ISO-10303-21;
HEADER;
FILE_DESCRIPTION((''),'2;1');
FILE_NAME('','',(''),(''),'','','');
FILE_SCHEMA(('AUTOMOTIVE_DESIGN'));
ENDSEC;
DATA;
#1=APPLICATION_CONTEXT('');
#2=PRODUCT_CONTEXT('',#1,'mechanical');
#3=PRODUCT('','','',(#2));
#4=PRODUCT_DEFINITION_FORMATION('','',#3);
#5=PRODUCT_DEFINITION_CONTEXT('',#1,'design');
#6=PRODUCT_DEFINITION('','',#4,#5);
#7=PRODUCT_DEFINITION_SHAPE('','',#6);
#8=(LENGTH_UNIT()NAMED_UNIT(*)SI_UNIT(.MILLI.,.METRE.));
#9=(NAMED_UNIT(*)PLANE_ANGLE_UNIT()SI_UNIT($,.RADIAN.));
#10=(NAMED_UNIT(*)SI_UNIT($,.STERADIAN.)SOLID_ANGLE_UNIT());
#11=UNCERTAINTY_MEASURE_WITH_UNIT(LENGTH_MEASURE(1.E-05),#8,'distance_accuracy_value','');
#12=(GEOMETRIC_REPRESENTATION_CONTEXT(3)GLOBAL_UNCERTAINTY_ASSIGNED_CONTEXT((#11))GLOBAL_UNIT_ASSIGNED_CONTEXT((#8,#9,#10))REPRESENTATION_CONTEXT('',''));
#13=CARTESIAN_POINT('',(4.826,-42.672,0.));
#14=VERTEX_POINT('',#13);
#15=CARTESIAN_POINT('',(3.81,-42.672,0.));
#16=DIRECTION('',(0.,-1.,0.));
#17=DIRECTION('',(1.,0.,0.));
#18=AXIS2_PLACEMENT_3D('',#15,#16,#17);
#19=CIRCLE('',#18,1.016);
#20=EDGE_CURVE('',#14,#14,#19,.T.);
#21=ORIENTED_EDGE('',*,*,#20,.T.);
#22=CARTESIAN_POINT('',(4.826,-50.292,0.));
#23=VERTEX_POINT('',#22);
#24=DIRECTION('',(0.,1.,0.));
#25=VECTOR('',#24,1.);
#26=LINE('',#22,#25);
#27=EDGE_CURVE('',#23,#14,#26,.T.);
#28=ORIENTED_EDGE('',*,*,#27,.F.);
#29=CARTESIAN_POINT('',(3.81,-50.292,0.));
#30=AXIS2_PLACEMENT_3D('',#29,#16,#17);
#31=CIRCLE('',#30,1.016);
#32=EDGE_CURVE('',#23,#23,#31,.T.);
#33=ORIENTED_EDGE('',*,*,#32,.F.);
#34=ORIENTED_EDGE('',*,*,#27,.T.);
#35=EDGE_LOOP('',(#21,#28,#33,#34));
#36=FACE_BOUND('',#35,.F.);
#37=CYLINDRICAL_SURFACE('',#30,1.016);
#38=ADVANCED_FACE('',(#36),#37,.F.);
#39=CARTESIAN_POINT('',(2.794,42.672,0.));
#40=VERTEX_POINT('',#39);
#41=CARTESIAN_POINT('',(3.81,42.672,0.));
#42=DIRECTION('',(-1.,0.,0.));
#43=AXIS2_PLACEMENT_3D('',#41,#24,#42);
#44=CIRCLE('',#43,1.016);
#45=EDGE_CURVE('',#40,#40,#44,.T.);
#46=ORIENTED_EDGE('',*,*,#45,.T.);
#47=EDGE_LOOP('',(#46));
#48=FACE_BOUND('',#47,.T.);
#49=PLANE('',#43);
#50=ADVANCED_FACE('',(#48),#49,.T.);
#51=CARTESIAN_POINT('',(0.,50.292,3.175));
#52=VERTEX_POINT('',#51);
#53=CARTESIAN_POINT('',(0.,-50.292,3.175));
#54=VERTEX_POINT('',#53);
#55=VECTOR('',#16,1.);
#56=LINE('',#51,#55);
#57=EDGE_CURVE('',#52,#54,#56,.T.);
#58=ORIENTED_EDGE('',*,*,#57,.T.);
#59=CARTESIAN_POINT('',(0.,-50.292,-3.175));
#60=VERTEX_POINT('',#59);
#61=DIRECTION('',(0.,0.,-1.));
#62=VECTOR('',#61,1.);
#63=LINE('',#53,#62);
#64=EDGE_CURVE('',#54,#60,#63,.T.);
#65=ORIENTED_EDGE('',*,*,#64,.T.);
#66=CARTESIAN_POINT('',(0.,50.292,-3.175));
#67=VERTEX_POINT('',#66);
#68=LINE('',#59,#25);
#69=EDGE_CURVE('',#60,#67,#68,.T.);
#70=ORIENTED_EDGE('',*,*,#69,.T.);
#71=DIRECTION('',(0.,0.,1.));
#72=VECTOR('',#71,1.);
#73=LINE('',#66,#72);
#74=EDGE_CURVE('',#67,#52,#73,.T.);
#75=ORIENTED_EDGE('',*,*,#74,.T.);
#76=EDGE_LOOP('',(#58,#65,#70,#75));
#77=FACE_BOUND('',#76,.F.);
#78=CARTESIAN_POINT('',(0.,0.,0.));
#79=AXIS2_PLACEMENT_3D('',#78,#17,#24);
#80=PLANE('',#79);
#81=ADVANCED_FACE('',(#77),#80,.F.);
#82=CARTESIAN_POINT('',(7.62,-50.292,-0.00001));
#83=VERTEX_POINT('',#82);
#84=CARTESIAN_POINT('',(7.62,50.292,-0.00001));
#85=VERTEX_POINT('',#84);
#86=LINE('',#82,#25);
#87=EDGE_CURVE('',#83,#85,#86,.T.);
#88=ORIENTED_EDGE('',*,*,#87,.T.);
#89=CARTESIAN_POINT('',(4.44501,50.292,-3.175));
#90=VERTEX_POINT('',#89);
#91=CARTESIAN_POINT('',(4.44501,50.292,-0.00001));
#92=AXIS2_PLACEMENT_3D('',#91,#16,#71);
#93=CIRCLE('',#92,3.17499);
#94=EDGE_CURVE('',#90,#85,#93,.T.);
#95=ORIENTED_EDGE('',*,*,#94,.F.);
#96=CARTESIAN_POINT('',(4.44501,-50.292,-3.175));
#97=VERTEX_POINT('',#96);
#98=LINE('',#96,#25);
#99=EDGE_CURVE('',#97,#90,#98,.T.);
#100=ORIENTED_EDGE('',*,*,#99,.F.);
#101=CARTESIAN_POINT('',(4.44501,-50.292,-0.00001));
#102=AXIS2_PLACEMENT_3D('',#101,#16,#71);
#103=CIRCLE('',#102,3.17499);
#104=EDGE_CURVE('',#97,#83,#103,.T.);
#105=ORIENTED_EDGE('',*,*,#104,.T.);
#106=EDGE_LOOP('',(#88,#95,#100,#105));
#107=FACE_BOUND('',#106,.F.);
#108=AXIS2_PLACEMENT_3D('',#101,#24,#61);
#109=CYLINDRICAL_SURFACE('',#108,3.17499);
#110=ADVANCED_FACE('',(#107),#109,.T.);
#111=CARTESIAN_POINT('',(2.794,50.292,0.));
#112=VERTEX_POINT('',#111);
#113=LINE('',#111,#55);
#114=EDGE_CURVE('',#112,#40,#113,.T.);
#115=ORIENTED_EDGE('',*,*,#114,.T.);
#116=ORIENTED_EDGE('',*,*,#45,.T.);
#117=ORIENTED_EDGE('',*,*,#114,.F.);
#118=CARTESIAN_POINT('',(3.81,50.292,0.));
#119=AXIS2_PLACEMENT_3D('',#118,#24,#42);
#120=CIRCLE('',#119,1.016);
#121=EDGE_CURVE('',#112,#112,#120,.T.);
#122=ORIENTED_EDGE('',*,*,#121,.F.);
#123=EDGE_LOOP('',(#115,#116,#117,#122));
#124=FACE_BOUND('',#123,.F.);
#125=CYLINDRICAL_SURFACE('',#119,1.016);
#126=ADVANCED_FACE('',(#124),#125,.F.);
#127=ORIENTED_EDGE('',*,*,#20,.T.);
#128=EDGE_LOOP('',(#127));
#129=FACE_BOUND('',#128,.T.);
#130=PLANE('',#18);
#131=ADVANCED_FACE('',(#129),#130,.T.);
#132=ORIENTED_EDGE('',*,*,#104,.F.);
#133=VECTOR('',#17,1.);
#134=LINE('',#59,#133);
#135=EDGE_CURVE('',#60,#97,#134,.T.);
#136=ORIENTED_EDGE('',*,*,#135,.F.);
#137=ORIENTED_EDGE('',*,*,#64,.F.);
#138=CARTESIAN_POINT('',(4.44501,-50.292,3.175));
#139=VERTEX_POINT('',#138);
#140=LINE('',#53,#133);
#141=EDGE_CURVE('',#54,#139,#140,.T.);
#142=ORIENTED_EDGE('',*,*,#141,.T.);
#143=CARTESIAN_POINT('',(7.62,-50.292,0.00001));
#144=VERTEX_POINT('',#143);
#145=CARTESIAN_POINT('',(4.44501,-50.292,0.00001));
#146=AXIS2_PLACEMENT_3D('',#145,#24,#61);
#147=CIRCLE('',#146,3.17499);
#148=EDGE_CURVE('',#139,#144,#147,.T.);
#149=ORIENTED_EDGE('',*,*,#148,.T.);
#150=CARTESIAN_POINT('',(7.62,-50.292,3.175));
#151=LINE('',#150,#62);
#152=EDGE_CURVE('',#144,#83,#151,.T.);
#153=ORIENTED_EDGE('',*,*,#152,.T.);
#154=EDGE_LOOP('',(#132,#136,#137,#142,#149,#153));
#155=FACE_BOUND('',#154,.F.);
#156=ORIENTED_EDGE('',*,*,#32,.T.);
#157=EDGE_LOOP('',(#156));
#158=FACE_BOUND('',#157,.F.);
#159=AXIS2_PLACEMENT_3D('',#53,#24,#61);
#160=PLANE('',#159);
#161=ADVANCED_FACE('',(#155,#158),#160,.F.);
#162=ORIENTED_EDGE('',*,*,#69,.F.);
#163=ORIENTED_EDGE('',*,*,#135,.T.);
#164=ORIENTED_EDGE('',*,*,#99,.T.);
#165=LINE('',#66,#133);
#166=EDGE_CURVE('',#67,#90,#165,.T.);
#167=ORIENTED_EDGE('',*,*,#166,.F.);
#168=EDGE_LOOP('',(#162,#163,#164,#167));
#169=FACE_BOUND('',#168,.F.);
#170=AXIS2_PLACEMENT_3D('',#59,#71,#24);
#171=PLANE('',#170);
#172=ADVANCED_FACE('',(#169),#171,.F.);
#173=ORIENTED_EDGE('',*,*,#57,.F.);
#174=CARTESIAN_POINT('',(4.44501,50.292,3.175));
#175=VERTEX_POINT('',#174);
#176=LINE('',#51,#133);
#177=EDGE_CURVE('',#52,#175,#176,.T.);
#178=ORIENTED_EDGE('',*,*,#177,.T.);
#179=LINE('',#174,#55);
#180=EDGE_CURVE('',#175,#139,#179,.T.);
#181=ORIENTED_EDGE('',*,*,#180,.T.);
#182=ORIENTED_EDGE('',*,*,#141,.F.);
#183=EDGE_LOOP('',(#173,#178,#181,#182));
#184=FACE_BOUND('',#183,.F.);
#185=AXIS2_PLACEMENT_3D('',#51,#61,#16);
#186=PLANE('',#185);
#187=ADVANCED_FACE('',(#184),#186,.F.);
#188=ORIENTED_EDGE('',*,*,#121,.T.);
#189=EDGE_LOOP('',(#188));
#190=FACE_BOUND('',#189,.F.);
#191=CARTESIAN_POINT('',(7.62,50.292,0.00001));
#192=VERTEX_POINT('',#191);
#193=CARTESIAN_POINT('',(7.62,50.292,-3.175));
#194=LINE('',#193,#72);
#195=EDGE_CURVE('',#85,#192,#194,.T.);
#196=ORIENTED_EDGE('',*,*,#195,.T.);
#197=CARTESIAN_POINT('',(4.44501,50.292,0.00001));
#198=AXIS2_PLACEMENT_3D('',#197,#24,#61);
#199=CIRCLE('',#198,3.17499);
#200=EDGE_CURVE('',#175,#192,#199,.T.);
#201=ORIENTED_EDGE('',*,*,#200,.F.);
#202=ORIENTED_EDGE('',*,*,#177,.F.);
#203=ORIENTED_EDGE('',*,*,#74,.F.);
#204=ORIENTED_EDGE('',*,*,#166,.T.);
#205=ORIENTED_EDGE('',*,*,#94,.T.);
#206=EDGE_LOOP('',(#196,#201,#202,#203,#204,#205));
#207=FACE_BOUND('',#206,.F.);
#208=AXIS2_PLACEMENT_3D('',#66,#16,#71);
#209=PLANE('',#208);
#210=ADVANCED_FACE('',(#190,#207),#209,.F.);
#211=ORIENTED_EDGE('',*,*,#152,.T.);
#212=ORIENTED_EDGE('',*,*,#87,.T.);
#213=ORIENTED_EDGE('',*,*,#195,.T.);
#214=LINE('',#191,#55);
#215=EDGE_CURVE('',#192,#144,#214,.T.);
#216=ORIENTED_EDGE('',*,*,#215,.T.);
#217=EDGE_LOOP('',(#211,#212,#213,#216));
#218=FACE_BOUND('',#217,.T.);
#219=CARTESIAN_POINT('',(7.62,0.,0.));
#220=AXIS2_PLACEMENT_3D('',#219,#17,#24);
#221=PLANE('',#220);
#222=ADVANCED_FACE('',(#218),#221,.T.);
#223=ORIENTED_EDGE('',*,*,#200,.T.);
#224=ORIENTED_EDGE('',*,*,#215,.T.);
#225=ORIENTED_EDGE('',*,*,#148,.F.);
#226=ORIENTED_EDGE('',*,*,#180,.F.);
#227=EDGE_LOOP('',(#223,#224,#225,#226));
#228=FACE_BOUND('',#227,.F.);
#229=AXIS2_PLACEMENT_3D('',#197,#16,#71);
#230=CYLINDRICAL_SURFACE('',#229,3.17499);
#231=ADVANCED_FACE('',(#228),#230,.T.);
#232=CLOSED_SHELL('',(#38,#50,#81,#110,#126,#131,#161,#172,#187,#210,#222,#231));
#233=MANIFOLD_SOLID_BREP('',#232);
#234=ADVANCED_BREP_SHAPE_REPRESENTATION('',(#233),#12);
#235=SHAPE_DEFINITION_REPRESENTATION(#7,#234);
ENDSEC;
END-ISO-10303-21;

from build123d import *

# Parameters (mm, degrees)
F1_DEPTH = 7.62
F2_R     = 3.17499
F4_R     = 1.016
F5_DEPTH = 7.62
F3_R     = 1.016
F6_DEPTH = 7.62


# Not quite as in the source:
# - a fillet or chamfer is up to 0.001 mm smaller than in the source, because OpenCascade refuses the exact size


with BuildPart() as f1:
    # F0 (on Right) → F1 (new body)
    with BuildSketch(Plane.YZ):
        Polygon((50.292, -3.175), (50.292, 3.175), (0, 3.175), (-50.292, 3.175), (-50.292, -3.175), align=None)
    extrude(amount=F1_DEPTH)

    # F2 (radius 3.175 in the source; OpenCascade refuses exactly that, so slightly less here)
    f2_edges = [f1.edges().sort_by_distance(p)[0] for p in [
        (7.62, 0, -3.175),
        (7.62, 0, 3.175),
    ]]
    fillet(f2_edges, radius=F2_R)

    # F4 (on face) → F5 (cut)
    with BuildSketch(Plane.XZ.offset(50.292)):
        with Locations((3.81, 0)):
            Circle(F4_R)
    extrude(amount=-F5_DEPTH, mode=Mode.SUBTRACT)

    # F3 (on face) → F6 (cut)
    with BuildSketch(Plane(origin=(0, 50.292, 0), x_dir=(-1, 0, 0), z_dir=(0, 1, 0))):
        with Locations((-3.81, 0)):
            Circle(F3_R)
    extrude(amount=-F6_DEPTH, mode=Mode.SUBTRACT)


solid = f1.part
